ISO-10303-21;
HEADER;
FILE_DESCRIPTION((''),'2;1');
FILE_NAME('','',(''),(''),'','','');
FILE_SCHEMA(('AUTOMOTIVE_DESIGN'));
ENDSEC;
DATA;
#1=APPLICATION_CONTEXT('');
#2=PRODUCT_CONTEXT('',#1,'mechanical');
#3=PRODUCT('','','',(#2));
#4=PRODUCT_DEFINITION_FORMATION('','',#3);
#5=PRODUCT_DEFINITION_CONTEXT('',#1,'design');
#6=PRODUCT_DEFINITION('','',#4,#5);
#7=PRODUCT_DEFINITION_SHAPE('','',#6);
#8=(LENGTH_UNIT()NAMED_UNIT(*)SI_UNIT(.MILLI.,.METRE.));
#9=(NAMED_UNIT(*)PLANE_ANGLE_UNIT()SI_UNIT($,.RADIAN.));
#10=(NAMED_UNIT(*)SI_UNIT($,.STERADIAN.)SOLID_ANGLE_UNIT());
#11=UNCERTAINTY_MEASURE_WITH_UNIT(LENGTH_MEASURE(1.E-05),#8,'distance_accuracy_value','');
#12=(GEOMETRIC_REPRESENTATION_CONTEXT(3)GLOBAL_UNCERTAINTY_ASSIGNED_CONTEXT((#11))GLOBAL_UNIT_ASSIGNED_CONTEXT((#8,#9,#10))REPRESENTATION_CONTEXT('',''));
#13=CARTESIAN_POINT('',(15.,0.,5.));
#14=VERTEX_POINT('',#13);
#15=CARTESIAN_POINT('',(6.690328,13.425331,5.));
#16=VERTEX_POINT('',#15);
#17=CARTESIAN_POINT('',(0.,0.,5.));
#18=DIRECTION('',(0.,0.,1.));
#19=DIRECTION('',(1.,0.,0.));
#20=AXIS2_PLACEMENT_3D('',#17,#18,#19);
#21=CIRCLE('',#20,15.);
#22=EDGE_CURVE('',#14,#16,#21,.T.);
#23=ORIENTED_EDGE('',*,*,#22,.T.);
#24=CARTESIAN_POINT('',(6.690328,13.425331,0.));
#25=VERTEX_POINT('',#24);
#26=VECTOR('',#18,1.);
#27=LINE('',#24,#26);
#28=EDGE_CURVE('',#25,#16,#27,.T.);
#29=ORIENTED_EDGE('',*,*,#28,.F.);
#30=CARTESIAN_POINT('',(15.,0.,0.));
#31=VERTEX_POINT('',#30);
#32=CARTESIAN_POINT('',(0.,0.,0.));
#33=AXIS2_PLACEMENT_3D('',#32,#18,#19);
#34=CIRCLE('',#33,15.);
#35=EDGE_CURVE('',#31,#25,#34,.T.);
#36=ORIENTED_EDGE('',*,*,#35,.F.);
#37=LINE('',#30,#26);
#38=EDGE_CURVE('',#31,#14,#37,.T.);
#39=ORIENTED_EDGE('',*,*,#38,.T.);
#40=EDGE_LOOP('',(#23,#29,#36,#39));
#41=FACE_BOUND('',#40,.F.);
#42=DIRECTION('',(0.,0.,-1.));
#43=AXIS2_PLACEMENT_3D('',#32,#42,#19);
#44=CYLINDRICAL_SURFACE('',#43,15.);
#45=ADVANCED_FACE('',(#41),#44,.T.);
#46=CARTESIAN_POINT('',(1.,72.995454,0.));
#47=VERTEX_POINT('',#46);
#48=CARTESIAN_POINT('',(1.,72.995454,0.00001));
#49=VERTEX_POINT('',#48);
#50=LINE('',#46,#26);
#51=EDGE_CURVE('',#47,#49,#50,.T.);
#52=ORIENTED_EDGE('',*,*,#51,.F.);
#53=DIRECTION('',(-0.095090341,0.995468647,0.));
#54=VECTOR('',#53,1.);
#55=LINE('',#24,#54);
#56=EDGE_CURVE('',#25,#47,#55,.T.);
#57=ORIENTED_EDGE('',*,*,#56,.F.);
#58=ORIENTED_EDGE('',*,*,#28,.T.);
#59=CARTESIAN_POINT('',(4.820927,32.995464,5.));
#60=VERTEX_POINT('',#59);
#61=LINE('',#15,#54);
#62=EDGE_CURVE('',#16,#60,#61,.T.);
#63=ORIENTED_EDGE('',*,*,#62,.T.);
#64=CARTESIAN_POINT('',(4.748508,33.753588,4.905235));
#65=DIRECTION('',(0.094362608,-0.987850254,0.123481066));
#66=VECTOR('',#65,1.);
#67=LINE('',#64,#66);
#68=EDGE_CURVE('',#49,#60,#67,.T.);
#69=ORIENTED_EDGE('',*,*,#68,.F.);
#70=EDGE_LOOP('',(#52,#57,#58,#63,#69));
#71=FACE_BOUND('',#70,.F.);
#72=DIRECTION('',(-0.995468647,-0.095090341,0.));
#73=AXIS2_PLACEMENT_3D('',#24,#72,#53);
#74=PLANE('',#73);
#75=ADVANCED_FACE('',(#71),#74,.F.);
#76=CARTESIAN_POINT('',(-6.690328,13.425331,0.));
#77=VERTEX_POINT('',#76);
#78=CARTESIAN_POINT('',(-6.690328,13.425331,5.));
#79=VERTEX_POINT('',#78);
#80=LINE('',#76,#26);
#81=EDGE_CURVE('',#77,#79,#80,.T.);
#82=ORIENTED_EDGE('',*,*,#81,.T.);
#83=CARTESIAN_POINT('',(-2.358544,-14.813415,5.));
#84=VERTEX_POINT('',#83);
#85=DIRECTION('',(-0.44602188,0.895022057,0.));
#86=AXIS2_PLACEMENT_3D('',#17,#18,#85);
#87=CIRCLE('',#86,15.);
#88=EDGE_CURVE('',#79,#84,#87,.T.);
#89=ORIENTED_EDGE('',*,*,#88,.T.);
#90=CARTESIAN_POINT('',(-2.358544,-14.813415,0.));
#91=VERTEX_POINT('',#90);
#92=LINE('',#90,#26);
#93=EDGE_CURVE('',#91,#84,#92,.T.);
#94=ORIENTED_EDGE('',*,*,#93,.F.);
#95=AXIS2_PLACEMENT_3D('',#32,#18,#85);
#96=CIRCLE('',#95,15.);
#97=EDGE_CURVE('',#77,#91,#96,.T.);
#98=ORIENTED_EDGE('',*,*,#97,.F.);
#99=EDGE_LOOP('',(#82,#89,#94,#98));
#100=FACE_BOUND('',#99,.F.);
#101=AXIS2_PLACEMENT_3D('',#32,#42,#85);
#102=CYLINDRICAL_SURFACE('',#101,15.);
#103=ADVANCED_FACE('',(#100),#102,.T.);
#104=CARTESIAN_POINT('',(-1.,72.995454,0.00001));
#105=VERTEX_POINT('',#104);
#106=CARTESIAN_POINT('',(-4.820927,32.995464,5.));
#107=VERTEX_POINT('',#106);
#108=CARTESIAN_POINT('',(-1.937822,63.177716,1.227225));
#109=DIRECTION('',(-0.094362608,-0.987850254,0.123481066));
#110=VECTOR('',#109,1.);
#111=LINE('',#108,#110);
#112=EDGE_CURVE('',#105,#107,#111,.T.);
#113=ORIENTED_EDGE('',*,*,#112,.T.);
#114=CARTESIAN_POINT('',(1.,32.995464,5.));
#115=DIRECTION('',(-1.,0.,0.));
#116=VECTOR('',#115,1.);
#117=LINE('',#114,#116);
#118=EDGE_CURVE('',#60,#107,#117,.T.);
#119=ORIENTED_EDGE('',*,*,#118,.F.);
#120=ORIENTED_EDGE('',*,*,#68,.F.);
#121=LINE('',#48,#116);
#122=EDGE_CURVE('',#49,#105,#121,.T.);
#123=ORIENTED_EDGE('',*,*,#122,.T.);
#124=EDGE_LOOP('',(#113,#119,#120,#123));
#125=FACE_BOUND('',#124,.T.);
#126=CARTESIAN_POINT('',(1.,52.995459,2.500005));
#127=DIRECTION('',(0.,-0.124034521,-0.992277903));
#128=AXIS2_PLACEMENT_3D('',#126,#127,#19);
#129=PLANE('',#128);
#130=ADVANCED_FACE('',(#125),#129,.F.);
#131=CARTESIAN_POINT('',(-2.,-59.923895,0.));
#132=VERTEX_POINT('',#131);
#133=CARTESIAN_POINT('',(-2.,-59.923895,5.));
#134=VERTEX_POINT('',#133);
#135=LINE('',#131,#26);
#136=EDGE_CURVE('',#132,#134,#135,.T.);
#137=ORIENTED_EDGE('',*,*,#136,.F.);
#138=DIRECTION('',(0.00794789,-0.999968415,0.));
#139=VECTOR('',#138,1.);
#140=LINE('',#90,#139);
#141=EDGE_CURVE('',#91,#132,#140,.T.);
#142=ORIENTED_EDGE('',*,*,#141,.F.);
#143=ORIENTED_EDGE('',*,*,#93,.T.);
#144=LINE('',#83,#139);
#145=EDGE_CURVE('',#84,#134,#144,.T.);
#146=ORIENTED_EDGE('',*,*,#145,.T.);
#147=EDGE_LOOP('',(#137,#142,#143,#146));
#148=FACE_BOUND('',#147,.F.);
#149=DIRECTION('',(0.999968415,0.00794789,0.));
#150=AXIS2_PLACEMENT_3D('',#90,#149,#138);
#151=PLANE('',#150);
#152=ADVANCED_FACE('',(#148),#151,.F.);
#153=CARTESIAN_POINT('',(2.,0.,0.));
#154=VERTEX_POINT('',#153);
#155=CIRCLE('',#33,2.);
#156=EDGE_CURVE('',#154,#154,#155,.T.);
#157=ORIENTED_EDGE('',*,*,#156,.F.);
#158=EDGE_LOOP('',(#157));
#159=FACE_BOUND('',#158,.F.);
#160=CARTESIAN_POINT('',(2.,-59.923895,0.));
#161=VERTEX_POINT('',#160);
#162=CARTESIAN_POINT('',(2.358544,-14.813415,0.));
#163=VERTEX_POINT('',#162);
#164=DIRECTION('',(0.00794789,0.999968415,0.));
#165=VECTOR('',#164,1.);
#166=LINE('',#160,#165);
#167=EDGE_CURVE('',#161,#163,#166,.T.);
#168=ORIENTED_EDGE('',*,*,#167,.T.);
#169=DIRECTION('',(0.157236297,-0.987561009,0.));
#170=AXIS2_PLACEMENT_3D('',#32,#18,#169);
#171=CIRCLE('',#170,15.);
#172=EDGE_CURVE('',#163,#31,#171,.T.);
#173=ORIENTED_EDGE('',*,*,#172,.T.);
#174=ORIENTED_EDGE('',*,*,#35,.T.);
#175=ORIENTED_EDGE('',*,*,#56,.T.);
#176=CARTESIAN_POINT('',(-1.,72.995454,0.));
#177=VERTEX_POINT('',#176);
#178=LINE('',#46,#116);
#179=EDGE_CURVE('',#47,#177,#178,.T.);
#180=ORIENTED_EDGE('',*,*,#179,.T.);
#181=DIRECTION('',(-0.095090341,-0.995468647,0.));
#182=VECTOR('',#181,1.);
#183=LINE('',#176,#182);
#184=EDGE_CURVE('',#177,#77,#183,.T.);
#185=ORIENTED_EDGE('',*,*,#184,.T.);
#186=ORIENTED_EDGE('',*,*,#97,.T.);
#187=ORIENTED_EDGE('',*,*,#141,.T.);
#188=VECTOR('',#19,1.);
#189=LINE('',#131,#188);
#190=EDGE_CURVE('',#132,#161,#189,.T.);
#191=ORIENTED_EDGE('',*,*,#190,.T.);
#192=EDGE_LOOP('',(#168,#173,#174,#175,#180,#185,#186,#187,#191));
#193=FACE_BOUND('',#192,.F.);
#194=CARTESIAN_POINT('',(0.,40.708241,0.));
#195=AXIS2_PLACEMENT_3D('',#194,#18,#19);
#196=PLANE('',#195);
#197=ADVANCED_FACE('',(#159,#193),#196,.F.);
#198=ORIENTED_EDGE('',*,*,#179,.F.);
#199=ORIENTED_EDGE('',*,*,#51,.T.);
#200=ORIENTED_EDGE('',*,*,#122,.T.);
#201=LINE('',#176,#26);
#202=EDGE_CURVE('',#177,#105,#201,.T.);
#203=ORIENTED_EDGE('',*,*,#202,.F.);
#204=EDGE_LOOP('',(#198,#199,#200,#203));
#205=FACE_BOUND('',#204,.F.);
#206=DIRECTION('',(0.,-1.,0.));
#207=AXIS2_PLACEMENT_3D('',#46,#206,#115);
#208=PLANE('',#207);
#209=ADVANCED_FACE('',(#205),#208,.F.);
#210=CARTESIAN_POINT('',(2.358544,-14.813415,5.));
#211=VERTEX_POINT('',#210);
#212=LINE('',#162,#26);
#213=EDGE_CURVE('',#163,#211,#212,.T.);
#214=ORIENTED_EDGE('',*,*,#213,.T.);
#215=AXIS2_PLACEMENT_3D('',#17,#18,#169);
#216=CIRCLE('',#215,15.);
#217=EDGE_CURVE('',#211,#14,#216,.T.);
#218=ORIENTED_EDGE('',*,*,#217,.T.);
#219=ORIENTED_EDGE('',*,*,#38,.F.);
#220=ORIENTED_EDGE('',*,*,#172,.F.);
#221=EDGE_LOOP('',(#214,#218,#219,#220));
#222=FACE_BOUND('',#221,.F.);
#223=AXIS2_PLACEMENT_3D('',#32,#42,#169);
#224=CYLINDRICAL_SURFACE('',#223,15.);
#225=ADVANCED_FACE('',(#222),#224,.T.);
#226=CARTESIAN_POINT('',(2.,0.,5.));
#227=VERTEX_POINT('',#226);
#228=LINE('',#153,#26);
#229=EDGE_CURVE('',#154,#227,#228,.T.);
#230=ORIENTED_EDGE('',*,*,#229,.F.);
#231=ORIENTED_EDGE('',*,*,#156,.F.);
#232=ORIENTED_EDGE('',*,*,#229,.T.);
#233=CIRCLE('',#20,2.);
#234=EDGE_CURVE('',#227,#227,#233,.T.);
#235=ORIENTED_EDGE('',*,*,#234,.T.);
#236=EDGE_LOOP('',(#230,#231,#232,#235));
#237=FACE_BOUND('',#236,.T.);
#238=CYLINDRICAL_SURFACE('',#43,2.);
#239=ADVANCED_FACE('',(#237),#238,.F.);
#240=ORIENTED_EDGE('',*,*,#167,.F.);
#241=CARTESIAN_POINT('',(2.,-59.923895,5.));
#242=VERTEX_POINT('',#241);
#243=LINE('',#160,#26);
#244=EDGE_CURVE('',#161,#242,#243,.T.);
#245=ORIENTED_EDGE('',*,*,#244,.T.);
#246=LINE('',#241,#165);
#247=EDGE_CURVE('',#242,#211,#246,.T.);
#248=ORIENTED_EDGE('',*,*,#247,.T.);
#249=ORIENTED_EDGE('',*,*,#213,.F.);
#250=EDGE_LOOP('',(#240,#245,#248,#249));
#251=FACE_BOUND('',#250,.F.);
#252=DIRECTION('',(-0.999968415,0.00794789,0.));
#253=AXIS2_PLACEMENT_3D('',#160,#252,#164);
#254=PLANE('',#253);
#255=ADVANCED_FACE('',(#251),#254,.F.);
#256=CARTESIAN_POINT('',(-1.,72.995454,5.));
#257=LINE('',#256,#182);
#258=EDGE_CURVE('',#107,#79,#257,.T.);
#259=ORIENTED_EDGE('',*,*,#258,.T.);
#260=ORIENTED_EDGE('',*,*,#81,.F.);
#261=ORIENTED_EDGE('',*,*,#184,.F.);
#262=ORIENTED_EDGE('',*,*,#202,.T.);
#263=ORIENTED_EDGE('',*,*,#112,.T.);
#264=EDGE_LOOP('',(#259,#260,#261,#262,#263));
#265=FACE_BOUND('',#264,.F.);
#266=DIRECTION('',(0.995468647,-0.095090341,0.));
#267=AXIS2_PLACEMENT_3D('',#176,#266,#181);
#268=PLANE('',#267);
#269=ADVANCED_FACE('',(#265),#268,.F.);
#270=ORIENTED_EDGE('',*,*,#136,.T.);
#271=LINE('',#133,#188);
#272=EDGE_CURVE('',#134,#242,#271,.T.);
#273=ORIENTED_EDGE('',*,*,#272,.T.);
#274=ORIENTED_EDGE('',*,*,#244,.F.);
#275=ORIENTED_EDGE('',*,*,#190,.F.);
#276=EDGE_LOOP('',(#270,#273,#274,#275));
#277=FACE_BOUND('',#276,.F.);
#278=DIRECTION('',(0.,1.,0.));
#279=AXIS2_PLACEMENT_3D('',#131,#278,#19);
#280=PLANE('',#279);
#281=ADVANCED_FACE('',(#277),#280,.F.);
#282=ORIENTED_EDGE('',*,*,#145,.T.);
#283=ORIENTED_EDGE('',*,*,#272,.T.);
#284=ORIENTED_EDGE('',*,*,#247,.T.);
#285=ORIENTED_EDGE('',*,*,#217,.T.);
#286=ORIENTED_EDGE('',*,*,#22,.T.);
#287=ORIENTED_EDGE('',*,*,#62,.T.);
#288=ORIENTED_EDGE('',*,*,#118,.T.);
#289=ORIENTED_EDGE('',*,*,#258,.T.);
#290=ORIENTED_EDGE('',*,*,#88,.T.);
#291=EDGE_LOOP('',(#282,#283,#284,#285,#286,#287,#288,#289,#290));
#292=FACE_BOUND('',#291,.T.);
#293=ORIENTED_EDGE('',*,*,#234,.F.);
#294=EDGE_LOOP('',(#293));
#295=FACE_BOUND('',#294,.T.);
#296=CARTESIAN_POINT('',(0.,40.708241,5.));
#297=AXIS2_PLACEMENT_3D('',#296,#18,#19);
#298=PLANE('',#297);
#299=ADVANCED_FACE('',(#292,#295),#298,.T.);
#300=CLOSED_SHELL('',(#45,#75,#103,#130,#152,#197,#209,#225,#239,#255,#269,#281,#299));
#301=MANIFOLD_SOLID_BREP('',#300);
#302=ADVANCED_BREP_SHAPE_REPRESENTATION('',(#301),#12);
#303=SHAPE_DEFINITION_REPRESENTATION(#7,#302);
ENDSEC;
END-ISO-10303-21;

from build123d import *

# Parameters (mm, degrees)
F0_R     = 2
F1_DEPTH = 5
F2_SIZE2 = 39.99999
F2_SIZE  = 4.99999


# Not quite as in the source:
# - a fillet or chamfer is up to 0.001 mm smaller than in the source, because OpenCascade refuses the exact size


with BuildPart() as f1:
    # F0 (on Top) → F1 (new body)
    with BuildSketch(Plane.XY):
        with BuildLine():
            Line((1, 72.995454073), (0, 72.995454073))
            Line((0, 72.995454073), (-1, 72.995454073))
            Line((-1, 72.995454073), (-6.690328202, 13.4253308544))
            ThreePointArc((-6.690328202, 13.4253308544), (0, 15), (6.690328202, 13.4253308544))
            Line((6.690328202, 13.4253308544), (1, 72.995454073))
        make_face()
        with BuildLine():
            ThreePointArc((15, 0), (12.7545074979, 7.8944625204), (6.690328202, 13.4253308544))
            Line((6.690328202, 13.4253308544), (2.3585444492, -14.813415139))
            ThreePointArc((2.3585444492, -14.813415139), (11.4100430923, -9.7370897413), (15, 0))
        make_face()
        with BuildLine():
            Line((2.3585444492, -14.813415139), (6.690328202, 13.4253308544))
            ThreePointArc((6.690328202, 13.4253308544), (0, 15), (-6.690328202, 13.4253308544))
            Line((-6.690328202, 13.4253308544), (-2.3585444492, -14.813415139))
            ThreePointArc((-2.3585444492, -14.813415139), (0, -15), (2.3585444492, -14.813415139))
        make_face()
        Circle(F0_R, mode=Mode.SUBTRACT)
        with BuildLine():
            Line((-2.3585444492, -14.813415139), (-6.690328202, 13.4253308544))
            ThreePointArc((-6.690328202, 13.4253308544), (-14.8265713462, -2.2743751044), (-2.3585444492, -14.813415139))
        make_face()
        with BuildLine():
            Line((2, -59.9238947034), (2.3585444492, -14.813415139))
            ThreePointArc((2.3585444492, -14.813415139), (0, -15), (-2.3585444492, -14.813415139))
            Line((-2.3585444492, -14.813415139), (-2, -59.9238947034))
            Line((-2, -59.9238947034), (0, -59.9238947034))
            Line((0, -59.9238947034), (2, -59.9238947034))
        make_face()
    extrude(amount=F1_DEPTH)

    # F2 (size 5 and 40 in the source; OpenCascade refuses exactly that, so slightly less here)
    f2_edges = [f1.edges().sort_by_distance(p)[0] for p in [
        (0, 72.995454, 5),
    ]]
    f2_side = f1.faces().sort_by_distance((0, 72.995454, 2.5))[0]
    chamfer(f2_edges, length=F2_SIZE, length2=F2_SIZE2, reference=f2_side)


solid = f1.part
